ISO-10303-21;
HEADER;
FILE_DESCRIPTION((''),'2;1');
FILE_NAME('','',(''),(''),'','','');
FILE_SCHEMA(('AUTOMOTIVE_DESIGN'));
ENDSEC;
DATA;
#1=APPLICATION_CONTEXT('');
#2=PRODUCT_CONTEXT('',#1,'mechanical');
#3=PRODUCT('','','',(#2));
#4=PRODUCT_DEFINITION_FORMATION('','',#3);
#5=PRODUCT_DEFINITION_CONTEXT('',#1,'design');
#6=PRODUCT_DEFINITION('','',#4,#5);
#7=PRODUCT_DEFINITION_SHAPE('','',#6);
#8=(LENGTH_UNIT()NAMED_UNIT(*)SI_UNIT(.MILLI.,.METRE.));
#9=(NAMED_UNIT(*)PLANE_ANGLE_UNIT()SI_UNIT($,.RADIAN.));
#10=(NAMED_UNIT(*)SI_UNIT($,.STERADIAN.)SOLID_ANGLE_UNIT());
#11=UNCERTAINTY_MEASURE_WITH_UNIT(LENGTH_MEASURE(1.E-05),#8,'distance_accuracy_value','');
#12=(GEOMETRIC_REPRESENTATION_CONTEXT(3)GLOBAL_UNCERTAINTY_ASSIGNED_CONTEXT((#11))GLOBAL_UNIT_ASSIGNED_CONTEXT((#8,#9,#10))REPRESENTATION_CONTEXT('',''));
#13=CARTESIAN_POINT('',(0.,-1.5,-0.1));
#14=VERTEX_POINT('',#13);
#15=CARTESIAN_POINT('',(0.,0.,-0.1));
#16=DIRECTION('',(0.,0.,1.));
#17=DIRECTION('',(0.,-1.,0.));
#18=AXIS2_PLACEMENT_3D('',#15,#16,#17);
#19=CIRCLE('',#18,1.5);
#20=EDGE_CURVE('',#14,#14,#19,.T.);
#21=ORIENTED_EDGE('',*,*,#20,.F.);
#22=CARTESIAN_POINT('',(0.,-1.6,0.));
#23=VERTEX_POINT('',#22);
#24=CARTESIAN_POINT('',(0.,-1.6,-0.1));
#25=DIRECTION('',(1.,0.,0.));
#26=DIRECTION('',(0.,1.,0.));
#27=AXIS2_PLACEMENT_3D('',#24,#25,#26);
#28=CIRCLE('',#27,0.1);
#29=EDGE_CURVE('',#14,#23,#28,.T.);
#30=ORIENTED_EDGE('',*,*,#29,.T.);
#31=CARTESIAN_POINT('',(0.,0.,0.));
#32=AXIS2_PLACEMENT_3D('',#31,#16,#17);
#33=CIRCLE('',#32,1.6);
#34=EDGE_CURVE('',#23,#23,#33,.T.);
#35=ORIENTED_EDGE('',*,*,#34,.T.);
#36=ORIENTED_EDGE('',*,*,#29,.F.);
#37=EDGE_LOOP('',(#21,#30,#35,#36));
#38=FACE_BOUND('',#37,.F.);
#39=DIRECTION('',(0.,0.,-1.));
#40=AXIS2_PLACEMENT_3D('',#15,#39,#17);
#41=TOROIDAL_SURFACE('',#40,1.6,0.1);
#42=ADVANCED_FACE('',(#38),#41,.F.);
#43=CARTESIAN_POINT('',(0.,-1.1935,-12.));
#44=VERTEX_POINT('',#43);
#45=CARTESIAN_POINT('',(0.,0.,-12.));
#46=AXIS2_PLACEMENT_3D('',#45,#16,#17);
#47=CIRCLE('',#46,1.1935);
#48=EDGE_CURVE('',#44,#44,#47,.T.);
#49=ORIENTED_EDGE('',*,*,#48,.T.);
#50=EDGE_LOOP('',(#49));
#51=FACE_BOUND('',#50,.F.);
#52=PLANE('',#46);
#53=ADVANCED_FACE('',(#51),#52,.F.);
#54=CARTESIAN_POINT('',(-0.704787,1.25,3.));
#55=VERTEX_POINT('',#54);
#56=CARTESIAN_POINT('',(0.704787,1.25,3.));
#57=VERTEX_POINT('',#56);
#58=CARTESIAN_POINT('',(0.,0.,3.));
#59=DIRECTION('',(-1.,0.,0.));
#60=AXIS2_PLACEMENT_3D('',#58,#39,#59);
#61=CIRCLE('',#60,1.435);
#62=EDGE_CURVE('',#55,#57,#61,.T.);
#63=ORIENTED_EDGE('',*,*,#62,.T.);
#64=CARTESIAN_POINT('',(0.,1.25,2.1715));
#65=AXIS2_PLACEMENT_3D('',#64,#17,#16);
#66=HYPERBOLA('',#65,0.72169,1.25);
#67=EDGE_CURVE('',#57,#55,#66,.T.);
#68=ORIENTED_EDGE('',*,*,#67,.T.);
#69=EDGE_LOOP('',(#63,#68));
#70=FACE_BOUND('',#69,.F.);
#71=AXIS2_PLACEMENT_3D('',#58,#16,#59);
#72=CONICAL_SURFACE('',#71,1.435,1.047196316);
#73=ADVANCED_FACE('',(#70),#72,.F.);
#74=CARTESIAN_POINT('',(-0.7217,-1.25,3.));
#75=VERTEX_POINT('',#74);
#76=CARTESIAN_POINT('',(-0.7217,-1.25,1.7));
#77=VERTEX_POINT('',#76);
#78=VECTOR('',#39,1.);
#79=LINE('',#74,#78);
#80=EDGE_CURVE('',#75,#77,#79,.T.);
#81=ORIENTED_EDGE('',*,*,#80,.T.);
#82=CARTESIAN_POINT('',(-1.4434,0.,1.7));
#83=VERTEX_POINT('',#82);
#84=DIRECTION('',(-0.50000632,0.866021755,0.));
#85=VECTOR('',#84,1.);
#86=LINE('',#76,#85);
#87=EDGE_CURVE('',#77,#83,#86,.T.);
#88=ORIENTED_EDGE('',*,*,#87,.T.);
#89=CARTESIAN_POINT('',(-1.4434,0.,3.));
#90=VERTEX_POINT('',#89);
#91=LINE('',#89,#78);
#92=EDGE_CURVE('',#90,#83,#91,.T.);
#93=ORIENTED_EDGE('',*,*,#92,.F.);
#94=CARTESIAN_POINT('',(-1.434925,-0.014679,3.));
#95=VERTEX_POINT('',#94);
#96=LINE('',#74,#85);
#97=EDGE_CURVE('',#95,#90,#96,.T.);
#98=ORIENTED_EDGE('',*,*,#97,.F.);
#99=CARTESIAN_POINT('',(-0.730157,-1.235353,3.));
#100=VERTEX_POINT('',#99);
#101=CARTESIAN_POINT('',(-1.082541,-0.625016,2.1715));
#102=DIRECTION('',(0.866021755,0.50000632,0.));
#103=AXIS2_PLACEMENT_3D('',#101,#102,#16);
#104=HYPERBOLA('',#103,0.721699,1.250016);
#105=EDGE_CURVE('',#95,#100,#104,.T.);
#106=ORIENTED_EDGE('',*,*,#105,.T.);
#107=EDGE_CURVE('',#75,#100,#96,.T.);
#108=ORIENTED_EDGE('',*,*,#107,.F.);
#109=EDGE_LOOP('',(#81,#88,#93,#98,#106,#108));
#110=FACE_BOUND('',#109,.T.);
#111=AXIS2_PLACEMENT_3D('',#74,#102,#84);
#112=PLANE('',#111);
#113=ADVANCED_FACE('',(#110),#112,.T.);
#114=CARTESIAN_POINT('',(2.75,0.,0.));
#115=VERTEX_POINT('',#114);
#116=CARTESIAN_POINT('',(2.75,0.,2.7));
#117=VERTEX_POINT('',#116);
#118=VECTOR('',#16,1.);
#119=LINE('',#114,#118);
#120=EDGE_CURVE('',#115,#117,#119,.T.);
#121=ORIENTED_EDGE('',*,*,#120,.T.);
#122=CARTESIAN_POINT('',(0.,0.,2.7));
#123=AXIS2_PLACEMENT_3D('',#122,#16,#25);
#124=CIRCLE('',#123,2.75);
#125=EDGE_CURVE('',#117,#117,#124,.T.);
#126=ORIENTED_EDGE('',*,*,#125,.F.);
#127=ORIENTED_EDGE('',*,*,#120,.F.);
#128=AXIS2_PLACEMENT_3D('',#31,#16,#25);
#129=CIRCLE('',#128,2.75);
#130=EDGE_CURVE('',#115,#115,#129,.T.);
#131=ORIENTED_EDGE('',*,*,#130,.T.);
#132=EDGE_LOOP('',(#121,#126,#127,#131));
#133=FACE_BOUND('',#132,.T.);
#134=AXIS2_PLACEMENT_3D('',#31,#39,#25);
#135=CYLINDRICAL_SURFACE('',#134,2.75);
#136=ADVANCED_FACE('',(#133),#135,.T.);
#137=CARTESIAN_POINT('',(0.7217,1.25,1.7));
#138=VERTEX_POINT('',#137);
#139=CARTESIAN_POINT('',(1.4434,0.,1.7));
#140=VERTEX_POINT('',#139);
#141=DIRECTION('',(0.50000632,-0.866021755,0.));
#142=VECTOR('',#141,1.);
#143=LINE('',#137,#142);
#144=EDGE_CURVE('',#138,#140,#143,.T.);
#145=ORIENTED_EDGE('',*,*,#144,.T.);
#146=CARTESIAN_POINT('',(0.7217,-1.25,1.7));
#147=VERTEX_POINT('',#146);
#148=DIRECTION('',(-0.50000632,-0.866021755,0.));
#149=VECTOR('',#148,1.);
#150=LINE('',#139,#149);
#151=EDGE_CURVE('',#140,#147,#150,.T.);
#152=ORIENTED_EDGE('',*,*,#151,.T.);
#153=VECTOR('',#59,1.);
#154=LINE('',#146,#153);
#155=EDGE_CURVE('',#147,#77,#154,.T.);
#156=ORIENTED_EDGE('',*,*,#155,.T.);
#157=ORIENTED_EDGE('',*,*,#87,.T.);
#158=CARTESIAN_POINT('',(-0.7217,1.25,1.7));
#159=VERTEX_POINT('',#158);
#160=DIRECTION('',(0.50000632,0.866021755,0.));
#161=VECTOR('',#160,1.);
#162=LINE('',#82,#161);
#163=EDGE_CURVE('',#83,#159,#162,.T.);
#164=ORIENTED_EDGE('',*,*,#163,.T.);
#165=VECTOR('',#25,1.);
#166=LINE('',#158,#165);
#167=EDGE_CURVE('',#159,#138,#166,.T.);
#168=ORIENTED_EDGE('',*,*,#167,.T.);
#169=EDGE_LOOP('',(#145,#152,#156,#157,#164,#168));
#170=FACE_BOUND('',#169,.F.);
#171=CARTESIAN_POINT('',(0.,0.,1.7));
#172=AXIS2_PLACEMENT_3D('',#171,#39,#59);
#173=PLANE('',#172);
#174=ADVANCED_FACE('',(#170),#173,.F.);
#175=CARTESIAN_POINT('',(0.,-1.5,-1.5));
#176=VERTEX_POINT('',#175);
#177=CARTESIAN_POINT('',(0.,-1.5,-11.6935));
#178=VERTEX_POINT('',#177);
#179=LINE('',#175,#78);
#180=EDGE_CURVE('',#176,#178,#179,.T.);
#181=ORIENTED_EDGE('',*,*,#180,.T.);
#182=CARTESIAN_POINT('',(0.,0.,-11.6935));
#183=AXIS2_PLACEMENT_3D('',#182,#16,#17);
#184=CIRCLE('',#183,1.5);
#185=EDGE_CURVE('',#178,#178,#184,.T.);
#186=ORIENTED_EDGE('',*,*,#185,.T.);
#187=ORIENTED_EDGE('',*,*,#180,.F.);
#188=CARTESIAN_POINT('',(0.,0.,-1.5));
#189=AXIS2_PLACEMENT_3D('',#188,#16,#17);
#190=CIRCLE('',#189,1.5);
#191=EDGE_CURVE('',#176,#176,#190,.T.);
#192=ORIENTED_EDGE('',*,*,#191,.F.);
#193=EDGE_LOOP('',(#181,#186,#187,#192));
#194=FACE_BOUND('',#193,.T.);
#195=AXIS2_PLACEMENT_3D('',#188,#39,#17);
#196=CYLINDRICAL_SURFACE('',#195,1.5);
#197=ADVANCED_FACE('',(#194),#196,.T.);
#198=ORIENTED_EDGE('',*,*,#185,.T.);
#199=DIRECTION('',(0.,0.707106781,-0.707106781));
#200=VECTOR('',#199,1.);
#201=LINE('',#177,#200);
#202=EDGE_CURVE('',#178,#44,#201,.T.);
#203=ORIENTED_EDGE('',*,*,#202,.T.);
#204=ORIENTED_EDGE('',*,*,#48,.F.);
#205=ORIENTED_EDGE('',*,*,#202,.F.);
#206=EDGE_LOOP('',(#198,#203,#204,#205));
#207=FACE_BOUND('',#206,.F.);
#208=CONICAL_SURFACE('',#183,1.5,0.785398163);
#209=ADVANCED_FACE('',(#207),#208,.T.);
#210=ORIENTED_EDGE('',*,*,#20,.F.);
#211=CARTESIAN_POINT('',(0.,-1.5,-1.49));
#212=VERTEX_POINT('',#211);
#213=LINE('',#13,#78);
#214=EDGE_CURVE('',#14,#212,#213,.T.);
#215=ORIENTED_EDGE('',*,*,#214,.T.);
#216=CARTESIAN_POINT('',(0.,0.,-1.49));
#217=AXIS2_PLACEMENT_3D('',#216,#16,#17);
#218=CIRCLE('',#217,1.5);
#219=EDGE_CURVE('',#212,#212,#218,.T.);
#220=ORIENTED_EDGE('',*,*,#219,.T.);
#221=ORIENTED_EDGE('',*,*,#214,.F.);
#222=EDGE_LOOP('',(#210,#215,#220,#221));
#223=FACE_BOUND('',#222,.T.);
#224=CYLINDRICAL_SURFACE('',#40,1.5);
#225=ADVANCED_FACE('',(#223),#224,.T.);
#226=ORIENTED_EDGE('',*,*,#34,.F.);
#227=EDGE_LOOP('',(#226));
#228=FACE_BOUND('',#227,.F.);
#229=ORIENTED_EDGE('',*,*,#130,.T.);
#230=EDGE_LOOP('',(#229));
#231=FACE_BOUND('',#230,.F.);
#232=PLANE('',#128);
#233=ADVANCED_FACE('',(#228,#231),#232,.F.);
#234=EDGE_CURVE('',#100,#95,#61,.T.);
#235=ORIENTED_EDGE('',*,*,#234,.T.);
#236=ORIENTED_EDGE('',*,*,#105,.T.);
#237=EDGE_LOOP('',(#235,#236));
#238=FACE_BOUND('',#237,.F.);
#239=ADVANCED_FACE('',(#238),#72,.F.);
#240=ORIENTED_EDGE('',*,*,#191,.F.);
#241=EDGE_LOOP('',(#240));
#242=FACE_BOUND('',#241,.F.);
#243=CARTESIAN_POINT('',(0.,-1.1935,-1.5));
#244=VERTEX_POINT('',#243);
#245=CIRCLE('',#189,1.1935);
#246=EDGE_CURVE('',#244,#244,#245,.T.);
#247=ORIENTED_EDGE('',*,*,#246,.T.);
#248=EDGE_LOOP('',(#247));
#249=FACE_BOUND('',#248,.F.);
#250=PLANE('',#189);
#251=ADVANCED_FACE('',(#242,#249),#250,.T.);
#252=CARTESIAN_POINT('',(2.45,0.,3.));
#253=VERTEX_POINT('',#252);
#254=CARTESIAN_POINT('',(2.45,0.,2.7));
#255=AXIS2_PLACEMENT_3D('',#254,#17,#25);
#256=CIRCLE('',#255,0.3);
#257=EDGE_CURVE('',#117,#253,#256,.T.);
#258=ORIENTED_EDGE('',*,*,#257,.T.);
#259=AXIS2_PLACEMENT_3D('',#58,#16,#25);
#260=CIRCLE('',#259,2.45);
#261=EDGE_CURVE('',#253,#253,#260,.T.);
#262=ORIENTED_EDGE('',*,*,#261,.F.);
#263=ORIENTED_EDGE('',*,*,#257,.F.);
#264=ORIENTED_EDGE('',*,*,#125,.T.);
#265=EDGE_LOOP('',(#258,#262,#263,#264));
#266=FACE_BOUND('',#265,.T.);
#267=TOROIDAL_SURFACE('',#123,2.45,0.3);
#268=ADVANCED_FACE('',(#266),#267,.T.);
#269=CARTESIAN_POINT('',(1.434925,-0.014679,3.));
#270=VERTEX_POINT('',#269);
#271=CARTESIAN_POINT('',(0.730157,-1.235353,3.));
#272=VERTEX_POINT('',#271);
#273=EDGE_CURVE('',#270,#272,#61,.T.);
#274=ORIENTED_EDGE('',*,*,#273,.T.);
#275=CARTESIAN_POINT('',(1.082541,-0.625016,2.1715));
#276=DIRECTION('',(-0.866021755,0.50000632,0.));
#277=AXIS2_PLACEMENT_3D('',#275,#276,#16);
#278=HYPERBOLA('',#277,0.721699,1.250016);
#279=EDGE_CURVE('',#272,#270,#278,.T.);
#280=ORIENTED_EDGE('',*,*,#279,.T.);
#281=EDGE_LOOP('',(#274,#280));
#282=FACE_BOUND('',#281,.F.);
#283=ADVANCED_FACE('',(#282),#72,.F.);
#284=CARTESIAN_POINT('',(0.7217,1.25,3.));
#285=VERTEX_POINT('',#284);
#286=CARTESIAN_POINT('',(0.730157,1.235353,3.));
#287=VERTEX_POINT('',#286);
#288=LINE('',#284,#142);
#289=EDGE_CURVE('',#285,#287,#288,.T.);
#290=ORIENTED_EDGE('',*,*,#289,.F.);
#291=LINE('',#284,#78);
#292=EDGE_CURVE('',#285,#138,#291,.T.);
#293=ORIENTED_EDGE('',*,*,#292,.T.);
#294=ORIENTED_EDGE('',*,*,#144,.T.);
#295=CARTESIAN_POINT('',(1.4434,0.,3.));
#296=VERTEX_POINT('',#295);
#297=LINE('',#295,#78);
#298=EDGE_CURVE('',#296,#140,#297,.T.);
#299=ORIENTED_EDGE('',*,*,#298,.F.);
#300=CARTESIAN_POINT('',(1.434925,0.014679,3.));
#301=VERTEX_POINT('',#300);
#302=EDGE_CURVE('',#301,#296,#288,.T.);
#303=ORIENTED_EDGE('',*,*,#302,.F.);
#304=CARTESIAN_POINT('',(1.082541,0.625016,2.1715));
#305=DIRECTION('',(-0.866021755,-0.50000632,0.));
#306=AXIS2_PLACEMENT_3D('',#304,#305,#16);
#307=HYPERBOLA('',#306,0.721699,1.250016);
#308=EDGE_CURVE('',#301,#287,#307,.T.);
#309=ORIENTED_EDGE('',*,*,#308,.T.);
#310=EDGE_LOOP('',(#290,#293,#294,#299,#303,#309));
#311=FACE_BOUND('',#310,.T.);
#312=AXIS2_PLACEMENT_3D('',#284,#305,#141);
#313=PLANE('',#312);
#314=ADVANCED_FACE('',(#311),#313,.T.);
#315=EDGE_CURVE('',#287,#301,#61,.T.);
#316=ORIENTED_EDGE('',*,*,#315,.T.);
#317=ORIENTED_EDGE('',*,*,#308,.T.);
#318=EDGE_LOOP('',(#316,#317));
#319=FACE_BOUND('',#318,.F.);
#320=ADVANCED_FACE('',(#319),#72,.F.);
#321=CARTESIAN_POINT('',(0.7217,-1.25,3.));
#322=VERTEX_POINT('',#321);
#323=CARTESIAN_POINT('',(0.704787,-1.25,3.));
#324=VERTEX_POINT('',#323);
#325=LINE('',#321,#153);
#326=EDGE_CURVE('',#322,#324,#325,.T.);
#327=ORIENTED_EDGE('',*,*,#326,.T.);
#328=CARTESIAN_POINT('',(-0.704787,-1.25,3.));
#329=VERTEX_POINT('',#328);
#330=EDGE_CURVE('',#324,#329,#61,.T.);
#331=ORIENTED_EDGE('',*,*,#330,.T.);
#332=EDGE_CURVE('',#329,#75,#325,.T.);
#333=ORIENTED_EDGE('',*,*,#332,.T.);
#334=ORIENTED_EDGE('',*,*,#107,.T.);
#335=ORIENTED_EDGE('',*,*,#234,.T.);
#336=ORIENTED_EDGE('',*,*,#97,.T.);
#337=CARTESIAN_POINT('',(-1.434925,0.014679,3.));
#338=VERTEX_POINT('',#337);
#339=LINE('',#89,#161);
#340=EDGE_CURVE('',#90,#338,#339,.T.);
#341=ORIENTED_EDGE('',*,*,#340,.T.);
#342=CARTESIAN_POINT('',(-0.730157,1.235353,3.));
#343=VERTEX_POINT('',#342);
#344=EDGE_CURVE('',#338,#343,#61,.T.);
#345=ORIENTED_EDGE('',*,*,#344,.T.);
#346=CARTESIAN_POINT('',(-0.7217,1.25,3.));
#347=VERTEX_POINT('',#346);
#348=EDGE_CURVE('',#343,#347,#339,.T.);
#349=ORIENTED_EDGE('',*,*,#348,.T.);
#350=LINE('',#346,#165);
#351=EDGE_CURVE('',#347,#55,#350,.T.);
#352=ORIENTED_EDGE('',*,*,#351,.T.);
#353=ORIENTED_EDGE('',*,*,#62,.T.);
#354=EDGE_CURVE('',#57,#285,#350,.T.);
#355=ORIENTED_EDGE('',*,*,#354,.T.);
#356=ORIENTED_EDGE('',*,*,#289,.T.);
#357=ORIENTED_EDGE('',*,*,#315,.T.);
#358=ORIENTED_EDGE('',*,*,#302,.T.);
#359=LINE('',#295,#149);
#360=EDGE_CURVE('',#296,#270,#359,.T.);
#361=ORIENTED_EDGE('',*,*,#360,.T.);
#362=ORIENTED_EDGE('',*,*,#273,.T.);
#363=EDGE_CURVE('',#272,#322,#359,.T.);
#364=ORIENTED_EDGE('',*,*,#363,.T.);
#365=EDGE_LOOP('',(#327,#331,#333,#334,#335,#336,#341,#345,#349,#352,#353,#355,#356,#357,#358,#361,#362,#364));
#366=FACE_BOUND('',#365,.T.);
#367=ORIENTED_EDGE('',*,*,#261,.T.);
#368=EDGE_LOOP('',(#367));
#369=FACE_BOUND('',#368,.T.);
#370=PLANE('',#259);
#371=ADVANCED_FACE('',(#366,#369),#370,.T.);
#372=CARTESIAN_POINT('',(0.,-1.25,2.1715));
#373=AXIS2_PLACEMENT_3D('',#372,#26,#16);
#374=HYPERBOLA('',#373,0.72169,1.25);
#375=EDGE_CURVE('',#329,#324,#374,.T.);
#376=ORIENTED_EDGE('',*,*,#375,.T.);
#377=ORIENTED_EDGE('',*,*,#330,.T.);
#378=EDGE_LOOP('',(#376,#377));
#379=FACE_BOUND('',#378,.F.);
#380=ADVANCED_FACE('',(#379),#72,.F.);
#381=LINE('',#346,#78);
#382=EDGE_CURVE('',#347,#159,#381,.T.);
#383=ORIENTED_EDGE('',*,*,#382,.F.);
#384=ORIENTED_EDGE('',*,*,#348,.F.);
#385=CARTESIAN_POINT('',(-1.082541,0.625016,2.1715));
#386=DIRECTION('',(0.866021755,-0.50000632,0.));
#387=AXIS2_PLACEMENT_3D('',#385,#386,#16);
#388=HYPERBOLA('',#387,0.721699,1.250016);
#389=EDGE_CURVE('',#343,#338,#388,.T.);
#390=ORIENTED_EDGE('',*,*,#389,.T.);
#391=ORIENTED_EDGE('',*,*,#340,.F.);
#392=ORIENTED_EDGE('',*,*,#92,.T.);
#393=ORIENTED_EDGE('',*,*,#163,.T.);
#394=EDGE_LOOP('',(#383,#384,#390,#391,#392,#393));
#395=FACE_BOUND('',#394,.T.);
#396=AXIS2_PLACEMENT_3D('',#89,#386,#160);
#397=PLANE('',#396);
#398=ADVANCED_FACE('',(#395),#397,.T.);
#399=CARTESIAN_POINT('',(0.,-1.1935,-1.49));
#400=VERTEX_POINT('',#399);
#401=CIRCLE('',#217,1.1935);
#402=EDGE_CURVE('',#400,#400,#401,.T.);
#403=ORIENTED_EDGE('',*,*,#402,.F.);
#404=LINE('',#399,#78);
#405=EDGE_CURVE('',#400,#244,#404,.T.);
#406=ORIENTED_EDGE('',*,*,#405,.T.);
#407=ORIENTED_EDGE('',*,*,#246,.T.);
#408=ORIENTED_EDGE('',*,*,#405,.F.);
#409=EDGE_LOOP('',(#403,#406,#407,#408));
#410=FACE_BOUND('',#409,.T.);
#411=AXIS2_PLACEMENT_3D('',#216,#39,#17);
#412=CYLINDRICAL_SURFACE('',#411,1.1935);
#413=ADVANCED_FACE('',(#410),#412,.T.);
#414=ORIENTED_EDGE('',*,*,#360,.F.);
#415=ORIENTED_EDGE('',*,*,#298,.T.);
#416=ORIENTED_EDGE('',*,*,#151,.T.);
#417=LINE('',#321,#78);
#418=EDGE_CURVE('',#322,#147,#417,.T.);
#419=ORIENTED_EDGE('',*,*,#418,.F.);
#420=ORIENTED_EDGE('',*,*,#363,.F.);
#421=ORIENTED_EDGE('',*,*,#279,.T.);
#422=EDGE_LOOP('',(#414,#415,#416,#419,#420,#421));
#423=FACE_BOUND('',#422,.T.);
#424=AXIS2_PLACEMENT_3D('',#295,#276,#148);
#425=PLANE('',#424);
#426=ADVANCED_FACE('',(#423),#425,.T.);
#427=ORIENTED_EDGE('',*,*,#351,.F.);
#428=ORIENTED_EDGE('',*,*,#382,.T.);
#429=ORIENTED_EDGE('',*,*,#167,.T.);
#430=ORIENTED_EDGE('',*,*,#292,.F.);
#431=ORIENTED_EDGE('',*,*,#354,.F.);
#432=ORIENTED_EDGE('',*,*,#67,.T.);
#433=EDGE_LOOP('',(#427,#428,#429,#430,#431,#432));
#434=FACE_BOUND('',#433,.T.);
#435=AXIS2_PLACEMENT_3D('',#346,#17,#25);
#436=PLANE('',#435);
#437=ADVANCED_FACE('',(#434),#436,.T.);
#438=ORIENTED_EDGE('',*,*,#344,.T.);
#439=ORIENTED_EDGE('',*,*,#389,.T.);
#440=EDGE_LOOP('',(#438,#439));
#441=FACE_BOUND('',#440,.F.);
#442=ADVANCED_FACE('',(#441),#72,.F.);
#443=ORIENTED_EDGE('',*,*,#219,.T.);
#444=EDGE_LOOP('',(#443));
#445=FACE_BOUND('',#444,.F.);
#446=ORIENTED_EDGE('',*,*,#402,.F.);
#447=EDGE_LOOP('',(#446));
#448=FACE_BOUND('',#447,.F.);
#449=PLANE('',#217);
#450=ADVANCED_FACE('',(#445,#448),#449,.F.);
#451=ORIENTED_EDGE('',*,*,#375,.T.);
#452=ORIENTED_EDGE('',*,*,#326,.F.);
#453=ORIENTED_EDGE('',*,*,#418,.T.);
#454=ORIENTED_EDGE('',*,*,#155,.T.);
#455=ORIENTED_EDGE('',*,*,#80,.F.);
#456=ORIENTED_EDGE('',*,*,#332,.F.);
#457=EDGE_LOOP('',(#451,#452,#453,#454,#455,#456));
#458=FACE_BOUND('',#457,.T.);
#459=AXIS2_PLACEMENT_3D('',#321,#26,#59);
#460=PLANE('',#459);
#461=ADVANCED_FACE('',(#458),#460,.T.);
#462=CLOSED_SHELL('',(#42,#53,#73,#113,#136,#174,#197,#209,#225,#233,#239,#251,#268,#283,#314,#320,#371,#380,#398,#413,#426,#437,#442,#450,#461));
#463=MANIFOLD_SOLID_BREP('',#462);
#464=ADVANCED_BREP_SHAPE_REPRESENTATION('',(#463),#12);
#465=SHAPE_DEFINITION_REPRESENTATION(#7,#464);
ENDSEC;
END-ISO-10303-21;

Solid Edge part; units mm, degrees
sketch "Sketch1" plane through (0, 0, 0) normal (0, 0, 1) x (1, 0, 0)
  circle A0 centre (0, 0) radius 2.75
extrude "Protrusion1" add sketch "Sketch1" along normal blind 3
sketch "Sketch2" plane through (0, 0, 3) normal (0, 0, 1) x (0, 1, 0)
  line L0 (0, 1.4434) -> (1.25, 0.7217)
  line L1 (1.25, 0.7217) -> (1.25, -0.7217)
  line L2 (1.25, -0.7217) -> (0, -1.4434)
  line L3 (0, -1.4434) -> (-1.25, -0.7217)
  line L4 (-1.25, -0.7217) -> (-1.25, 0.7217)
  line L5 (-1.25, 0.7217) -> (0, 1.4434)
extrude "Cutout1" cut sketch "Sketch2" against normal blind 1.3
fillet "Round1" radius 0.3 1 edges at (-2.75, 0, 3)
sketch "Sketch3" plane through (0, 0, 0) normal (1, 0, 0) x (0, 1, 0)
  line L0 (-1.1935, -12) -> (0, -12)
  line L1 (-1.5, -11.6935) -> (-1.1935, -12)
  line L2 (-1.5, -1.5) -> (-1.5, -11.6935)
  line L3 (-1.1935, -1.5) -> (-1.5, -1.5)
  line L4 (-1.1935, -1.49) -> (-1.1935, -1.5)
  line L5 (-1.5, -1.49) -> (-1.1935, -1.49)
  line L6 (-1.5, -0.1) -> (-1.5, -1.49)
  arc A0 (-1.5, -0.1) -> (-1.6, 0) centre (-1.6, -0.1) ccw
  dimension "D1" = 1.5
  dimension "D2" = 0.01
  dimension "D3" = 0.1
  dimension "D4" = 12
revolve "RevolvedProtrusion1" add sketch "Sketch3" angle 360 about axis through (0, 0, -60.325) along (0, 0, 1) material side at (0, -0.5968, -11.95)
cosmetic_thread "Thread1"
sketch "Sketch4" plane through (0, 0, 0) normal (0, -1, 0) x (1, 0, 0)
  line L0 (-1.435, 3) -> (0, 2.1715)
revolve "RevolvedCutout1" cut sketch "Sketch4" angle 360 about axis through (0, 0, 57.15) along (0, 0, -1) material side at (-0.6925, 0, 2.6291)
properties material "Steel"
